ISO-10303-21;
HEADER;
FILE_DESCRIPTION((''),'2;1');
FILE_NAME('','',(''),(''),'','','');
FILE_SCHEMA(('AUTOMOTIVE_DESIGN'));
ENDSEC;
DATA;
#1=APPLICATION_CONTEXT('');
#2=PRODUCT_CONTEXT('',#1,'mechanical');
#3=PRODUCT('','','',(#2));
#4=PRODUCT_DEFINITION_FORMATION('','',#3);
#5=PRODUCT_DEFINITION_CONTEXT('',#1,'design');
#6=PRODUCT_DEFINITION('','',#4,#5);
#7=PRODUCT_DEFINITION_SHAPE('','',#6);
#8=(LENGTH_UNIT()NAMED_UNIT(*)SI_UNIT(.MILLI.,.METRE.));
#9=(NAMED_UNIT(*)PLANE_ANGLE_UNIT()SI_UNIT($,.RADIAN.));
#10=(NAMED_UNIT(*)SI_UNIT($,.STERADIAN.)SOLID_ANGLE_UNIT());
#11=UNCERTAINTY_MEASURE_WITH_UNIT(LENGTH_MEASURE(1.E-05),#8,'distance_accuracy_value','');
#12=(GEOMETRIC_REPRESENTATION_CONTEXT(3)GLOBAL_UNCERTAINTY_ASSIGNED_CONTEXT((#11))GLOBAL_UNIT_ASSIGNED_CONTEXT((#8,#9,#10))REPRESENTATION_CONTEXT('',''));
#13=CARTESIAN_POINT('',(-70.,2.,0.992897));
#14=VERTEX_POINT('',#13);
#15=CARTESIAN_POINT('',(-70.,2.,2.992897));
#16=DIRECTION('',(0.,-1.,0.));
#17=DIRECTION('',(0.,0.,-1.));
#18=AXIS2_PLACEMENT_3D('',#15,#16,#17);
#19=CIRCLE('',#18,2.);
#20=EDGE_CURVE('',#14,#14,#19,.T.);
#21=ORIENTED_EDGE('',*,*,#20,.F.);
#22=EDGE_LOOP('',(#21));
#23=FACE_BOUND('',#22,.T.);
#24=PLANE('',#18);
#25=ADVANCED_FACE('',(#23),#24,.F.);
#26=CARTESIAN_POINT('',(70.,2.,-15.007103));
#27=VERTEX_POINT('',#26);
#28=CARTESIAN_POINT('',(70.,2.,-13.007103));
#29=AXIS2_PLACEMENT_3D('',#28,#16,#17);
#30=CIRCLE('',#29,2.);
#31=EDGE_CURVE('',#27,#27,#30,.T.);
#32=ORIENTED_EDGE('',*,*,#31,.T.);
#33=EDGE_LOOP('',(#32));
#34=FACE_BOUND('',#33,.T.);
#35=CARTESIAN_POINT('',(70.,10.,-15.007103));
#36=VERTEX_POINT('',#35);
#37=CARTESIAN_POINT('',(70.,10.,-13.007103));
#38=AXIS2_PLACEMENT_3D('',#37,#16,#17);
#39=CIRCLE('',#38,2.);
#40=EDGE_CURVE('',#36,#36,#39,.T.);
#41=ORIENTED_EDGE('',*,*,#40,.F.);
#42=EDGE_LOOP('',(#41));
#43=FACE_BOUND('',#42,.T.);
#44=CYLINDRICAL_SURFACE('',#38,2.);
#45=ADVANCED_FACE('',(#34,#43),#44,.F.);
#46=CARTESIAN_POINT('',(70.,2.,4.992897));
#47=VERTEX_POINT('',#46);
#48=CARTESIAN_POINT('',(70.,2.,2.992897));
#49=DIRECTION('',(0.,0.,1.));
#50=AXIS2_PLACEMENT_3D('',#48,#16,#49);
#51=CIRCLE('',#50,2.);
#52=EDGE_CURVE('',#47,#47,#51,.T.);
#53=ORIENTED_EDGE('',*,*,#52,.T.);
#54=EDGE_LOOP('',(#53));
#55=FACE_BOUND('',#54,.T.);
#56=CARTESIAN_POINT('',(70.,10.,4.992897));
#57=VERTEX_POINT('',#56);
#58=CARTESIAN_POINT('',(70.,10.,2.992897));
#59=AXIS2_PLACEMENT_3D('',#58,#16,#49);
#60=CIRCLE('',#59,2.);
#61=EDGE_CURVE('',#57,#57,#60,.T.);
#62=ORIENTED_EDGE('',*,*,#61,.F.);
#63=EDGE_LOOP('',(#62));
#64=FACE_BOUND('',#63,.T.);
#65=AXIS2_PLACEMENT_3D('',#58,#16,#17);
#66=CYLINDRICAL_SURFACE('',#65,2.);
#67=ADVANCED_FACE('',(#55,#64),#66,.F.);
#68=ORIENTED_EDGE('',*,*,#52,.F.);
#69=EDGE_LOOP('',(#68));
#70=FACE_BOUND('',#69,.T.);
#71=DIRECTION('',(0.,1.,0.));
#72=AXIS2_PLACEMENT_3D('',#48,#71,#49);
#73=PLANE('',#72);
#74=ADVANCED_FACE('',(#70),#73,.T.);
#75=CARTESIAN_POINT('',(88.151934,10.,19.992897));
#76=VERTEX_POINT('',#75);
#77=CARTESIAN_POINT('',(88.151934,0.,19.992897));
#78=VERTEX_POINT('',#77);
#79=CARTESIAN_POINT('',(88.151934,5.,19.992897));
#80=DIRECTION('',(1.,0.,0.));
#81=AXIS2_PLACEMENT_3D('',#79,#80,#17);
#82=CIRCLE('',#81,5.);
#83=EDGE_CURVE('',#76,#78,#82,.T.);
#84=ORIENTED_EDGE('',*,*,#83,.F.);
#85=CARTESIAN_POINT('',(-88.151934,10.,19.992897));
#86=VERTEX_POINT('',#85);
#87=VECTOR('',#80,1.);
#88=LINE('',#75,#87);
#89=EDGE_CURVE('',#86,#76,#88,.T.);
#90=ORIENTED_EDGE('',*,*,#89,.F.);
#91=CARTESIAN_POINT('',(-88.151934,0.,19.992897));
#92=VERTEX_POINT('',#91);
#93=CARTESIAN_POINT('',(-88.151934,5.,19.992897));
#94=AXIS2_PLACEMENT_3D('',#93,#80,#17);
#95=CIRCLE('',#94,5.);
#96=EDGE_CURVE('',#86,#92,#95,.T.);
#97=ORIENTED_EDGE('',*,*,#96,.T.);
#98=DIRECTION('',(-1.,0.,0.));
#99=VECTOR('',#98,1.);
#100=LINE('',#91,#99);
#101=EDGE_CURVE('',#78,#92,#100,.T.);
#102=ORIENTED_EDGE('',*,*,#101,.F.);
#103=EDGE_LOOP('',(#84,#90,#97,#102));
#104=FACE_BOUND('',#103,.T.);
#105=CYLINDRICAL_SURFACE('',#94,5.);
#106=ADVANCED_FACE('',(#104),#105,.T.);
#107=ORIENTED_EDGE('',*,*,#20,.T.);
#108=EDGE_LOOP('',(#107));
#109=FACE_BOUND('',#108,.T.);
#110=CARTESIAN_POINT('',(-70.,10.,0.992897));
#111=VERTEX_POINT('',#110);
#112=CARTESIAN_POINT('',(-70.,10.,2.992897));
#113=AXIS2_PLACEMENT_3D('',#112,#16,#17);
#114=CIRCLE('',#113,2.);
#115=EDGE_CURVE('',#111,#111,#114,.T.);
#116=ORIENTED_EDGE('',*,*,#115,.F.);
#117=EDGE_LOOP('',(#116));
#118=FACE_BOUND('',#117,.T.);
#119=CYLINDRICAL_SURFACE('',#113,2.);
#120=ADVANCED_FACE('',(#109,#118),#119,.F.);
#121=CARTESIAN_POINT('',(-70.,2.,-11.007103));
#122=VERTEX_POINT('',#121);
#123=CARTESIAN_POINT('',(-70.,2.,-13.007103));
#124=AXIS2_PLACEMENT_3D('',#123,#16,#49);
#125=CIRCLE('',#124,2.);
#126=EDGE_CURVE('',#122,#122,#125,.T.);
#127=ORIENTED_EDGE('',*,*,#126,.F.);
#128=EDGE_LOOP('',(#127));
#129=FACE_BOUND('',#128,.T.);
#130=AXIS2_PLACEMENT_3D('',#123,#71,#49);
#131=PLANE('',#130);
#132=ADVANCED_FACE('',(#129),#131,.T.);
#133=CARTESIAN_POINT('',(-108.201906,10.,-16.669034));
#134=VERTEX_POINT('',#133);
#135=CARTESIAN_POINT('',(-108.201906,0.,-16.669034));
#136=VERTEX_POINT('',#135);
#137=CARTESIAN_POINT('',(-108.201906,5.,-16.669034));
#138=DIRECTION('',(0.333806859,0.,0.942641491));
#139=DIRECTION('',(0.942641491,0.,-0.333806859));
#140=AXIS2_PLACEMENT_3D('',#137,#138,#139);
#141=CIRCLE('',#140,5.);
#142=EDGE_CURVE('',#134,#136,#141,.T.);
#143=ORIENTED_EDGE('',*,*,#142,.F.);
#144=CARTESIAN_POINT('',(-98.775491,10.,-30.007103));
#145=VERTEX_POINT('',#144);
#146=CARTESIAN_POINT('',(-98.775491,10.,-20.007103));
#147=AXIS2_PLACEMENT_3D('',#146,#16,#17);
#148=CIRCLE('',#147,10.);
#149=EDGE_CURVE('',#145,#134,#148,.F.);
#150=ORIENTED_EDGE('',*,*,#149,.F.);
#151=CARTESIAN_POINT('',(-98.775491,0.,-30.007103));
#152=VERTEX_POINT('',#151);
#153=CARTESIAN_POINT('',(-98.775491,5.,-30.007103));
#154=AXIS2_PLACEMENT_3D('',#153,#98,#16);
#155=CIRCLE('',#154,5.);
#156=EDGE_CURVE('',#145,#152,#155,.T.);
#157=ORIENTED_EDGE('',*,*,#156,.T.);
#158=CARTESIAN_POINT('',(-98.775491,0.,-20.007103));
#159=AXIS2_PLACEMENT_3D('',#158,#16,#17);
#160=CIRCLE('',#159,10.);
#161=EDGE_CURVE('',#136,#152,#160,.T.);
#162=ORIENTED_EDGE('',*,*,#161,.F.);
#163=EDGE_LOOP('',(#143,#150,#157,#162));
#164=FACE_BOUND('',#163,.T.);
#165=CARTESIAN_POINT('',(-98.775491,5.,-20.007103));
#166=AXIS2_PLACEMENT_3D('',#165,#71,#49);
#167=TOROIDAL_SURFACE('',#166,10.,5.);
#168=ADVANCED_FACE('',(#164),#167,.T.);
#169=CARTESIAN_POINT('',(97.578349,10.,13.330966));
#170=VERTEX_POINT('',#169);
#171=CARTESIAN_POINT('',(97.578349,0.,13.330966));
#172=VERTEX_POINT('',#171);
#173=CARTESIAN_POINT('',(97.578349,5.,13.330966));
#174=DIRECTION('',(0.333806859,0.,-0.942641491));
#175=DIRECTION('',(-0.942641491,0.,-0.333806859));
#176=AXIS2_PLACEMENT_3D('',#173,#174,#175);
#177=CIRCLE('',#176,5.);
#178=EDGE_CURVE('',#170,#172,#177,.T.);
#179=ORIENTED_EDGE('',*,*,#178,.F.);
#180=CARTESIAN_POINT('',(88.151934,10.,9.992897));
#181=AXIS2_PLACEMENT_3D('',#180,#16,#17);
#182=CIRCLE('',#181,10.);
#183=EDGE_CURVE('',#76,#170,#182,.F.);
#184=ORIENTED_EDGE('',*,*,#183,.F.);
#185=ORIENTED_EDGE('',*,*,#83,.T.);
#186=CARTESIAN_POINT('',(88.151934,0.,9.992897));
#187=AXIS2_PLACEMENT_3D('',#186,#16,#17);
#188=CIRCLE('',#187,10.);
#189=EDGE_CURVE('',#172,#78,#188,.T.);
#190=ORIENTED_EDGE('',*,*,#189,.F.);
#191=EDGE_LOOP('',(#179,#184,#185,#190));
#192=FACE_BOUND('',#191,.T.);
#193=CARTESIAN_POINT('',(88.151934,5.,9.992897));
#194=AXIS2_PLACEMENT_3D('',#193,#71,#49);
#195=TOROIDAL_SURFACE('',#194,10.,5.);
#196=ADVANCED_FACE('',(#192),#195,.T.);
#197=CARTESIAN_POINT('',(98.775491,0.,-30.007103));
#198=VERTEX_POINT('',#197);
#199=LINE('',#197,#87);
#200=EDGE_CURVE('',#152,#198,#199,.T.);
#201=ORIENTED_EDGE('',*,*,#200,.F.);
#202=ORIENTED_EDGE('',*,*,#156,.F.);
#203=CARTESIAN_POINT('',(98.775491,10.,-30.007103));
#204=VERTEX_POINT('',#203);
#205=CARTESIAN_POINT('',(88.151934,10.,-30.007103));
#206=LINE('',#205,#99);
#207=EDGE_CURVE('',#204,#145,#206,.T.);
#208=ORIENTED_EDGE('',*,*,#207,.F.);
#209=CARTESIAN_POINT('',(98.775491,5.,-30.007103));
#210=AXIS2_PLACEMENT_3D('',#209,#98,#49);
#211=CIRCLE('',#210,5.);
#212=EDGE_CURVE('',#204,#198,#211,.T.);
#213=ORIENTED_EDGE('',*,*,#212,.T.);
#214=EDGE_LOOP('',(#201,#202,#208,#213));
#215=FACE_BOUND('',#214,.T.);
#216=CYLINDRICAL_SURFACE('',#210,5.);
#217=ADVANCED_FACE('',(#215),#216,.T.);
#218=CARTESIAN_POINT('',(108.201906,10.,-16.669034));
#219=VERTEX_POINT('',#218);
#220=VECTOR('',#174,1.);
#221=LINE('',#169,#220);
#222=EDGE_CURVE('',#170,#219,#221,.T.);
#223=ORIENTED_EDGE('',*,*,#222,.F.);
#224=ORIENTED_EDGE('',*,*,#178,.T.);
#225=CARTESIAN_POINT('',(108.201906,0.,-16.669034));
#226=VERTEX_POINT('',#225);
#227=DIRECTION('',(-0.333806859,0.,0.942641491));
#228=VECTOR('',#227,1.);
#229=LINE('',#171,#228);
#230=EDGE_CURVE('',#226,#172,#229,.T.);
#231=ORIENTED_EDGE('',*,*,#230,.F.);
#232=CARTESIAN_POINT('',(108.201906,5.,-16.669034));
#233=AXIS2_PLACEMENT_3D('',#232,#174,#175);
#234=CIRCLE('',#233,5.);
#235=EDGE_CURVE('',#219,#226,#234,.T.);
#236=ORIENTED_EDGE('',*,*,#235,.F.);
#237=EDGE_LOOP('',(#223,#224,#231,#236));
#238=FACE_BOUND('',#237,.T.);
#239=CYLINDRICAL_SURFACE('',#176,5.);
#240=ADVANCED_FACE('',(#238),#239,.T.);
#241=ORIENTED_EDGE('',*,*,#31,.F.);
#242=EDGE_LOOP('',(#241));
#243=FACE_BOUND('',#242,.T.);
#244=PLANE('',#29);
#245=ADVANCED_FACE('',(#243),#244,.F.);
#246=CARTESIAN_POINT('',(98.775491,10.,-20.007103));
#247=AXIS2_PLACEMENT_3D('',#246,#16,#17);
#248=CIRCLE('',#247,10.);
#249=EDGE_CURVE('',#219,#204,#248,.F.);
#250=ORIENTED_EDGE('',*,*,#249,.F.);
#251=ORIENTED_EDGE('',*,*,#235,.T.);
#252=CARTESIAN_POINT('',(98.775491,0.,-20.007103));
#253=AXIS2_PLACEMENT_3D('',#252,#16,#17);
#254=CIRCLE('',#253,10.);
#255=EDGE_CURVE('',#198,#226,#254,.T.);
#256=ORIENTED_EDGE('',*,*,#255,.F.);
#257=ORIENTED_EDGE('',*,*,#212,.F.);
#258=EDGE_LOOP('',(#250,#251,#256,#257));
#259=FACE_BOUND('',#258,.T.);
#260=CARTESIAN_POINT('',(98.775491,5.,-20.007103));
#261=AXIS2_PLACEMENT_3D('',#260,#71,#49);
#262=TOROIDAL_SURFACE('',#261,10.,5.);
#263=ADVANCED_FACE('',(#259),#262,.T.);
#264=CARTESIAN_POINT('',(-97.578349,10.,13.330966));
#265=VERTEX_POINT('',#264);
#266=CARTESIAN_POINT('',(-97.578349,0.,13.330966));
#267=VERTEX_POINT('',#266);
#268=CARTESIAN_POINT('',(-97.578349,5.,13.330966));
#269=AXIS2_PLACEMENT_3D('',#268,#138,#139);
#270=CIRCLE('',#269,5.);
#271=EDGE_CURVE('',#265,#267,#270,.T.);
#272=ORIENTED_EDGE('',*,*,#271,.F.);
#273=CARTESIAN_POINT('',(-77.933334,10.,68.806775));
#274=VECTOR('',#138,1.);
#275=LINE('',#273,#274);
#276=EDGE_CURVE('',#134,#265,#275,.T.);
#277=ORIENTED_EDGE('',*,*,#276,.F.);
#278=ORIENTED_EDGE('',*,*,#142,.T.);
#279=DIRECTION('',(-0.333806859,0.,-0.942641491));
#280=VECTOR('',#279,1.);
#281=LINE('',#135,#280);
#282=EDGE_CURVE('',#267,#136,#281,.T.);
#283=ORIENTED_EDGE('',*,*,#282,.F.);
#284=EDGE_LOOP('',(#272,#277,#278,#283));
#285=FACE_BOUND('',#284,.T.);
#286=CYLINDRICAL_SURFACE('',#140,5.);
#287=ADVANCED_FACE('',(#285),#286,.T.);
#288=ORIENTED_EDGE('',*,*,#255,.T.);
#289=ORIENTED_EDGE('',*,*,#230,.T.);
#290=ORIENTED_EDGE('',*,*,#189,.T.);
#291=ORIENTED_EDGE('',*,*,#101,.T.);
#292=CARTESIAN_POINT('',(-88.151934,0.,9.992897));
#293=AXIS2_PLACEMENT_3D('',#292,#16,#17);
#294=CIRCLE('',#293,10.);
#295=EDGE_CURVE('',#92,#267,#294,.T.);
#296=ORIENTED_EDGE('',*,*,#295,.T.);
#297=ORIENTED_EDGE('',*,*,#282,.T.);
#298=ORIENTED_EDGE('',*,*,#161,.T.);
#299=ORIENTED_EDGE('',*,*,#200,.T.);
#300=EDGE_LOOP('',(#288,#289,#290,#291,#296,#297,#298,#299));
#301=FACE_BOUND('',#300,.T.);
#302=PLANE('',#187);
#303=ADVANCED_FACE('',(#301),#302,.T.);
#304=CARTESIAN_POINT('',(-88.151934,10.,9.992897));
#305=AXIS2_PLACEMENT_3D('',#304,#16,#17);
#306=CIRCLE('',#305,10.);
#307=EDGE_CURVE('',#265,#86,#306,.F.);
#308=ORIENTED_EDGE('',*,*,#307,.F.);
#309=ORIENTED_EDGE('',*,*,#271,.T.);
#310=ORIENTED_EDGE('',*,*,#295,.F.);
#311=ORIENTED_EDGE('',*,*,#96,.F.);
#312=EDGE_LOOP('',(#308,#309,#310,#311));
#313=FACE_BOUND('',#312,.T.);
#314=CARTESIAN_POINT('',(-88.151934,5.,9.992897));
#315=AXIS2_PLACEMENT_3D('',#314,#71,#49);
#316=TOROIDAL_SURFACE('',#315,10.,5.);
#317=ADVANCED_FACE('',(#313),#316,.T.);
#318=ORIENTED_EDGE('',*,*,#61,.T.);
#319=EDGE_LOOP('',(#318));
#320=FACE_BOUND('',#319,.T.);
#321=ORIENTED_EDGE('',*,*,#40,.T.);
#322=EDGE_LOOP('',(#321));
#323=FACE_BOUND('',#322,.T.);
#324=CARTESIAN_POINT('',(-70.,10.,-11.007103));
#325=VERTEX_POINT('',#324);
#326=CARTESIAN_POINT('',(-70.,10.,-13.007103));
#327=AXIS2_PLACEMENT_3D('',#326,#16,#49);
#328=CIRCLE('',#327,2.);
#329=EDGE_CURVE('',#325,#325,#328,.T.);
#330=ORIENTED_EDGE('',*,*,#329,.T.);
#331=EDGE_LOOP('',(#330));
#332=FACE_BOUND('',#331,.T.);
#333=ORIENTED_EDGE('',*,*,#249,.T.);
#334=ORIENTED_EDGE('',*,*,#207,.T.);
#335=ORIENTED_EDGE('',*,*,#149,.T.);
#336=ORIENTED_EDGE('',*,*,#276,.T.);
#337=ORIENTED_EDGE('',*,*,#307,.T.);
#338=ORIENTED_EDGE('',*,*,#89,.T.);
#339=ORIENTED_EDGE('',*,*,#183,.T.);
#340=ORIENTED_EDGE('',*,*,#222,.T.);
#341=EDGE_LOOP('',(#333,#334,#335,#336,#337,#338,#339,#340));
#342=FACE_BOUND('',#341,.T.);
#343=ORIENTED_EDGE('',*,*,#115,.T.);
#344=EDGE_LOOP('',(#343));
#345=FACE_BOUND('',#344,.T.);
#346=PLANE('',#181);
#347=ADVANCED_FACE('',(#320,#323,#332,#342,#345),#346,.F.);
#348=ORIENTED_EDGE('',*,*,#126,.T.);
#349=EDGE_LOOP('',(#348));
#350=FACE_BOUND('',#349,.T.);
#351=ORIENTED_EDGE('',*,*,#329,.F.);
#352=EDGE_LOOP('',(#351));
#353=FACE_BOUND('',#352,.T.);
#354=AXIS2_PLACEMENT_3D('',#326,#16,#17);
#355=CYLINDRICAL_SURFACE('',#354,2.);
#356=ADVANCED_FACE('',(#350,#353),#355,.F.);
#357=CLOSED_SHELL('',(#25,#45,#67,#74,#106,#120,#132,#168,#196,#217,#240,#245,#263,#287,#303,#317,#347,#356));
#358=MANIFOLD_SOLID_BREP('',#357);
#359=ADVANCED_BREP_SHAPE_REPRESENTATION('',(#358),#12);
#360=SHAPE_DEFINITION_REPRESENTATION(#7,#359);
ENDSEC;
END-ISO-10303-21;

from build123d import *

# Parameters (mm, degrees)
BOSS_EXTRUDE1_DEPTH = 10
FILLET1_R           = 5
CUT_EXTRUDE7_START  = -2
SKETCH5_R           = 2
CUT_EXTRUDE7_DEPTH  = 8


with BuildPart() as part:
    # Sketch1 → Boss-Extrude1 (new body)
    with BuildSketch(Plane(origin=(0, 0, 0), x_dir=(1, 0, 0), z_dir=(0, 1, 0))):
        with BuildLine():
            Line((-112.915113285, 15), (-102.291556109, -15))
            ThreePointArc((-102.291556109, -15), (-96.809111593, -22.242520439), (-88.151933742, -24.992897111))
            Line((-88.151933742, -24.992897111), (88.151933742, -24.992897111))
            ThreePointArc((88.151933742, -24.992897111), (96.809111593, -22.242520439), (102.291556109, -15))
            Line((102.291556109, -15), (112.915113285, 15))
            ThreePointArc((112.915113285, 15), (111.025114246, 28.664280739), (98.775490918, 35.007102889))
            Line((98.775490918, 35.007102889), (-98.775490918, 35.007102889))
            ThreePointArc((-98.775490918, 35.007102889), (-111.025114246, 28.664280739), (-112.915113285, 15))
        make_face()
    extrude(amount=BOSS_EXTRUDE1_DEPTH)

    # Fillet1
    fillet1_edges = [part.edges().sort_by_distance(p)[0] for p in [
        (0, 0, -35.007102889),
        (111.025114246, 0, -28.664280739),
        (107.603334697, 0, 0),
        (96.809111593, 0, 22.242520439),
        (0, 10, -35.007102889),
        (-111.025114246, 10, -28.664280739),
        (-107.603334697, 10, 0),
        (-96.809111593, 10, 22.242520439),
        (0, 10, 24.992897111),
        (0, 0, 24.992897111),
        (107.603334697, 10, 0),
        (-107.603334697, 0, 0),
    ]]
    fillet(fillet1_edges, radius=FILLET1_R - 0.0001)  # a hair under: the kernel refuses the full size

    # Sketch5 → Cut-Extrude7 (cut)
    with BuildSketch(Plane.XZ.offset(CUT_EXTRUDE7_START)):
        with Locations(Location((-70, 2.992897111, 0), (0, 0, 270))):
            Circle(SKETCH5_R)
        with Locations(Location((-70, -13.007102889, 0), (0, 0, 90))):
            Circle(SKETCH5_R)
        with Locations(Location((70, -13.007102889, 0), (0, 0, 270))):
            Circle(SKETCH5_R)
        with Locations(Location((70, 2.992897111, 0), (0, 0, 90))):
            Circle(SKETCH5_R)
    extrude(amount=-CUT_EXTRUDE7_DEPTH, mode=Mode.SUBTRACT)


solid = part.part
